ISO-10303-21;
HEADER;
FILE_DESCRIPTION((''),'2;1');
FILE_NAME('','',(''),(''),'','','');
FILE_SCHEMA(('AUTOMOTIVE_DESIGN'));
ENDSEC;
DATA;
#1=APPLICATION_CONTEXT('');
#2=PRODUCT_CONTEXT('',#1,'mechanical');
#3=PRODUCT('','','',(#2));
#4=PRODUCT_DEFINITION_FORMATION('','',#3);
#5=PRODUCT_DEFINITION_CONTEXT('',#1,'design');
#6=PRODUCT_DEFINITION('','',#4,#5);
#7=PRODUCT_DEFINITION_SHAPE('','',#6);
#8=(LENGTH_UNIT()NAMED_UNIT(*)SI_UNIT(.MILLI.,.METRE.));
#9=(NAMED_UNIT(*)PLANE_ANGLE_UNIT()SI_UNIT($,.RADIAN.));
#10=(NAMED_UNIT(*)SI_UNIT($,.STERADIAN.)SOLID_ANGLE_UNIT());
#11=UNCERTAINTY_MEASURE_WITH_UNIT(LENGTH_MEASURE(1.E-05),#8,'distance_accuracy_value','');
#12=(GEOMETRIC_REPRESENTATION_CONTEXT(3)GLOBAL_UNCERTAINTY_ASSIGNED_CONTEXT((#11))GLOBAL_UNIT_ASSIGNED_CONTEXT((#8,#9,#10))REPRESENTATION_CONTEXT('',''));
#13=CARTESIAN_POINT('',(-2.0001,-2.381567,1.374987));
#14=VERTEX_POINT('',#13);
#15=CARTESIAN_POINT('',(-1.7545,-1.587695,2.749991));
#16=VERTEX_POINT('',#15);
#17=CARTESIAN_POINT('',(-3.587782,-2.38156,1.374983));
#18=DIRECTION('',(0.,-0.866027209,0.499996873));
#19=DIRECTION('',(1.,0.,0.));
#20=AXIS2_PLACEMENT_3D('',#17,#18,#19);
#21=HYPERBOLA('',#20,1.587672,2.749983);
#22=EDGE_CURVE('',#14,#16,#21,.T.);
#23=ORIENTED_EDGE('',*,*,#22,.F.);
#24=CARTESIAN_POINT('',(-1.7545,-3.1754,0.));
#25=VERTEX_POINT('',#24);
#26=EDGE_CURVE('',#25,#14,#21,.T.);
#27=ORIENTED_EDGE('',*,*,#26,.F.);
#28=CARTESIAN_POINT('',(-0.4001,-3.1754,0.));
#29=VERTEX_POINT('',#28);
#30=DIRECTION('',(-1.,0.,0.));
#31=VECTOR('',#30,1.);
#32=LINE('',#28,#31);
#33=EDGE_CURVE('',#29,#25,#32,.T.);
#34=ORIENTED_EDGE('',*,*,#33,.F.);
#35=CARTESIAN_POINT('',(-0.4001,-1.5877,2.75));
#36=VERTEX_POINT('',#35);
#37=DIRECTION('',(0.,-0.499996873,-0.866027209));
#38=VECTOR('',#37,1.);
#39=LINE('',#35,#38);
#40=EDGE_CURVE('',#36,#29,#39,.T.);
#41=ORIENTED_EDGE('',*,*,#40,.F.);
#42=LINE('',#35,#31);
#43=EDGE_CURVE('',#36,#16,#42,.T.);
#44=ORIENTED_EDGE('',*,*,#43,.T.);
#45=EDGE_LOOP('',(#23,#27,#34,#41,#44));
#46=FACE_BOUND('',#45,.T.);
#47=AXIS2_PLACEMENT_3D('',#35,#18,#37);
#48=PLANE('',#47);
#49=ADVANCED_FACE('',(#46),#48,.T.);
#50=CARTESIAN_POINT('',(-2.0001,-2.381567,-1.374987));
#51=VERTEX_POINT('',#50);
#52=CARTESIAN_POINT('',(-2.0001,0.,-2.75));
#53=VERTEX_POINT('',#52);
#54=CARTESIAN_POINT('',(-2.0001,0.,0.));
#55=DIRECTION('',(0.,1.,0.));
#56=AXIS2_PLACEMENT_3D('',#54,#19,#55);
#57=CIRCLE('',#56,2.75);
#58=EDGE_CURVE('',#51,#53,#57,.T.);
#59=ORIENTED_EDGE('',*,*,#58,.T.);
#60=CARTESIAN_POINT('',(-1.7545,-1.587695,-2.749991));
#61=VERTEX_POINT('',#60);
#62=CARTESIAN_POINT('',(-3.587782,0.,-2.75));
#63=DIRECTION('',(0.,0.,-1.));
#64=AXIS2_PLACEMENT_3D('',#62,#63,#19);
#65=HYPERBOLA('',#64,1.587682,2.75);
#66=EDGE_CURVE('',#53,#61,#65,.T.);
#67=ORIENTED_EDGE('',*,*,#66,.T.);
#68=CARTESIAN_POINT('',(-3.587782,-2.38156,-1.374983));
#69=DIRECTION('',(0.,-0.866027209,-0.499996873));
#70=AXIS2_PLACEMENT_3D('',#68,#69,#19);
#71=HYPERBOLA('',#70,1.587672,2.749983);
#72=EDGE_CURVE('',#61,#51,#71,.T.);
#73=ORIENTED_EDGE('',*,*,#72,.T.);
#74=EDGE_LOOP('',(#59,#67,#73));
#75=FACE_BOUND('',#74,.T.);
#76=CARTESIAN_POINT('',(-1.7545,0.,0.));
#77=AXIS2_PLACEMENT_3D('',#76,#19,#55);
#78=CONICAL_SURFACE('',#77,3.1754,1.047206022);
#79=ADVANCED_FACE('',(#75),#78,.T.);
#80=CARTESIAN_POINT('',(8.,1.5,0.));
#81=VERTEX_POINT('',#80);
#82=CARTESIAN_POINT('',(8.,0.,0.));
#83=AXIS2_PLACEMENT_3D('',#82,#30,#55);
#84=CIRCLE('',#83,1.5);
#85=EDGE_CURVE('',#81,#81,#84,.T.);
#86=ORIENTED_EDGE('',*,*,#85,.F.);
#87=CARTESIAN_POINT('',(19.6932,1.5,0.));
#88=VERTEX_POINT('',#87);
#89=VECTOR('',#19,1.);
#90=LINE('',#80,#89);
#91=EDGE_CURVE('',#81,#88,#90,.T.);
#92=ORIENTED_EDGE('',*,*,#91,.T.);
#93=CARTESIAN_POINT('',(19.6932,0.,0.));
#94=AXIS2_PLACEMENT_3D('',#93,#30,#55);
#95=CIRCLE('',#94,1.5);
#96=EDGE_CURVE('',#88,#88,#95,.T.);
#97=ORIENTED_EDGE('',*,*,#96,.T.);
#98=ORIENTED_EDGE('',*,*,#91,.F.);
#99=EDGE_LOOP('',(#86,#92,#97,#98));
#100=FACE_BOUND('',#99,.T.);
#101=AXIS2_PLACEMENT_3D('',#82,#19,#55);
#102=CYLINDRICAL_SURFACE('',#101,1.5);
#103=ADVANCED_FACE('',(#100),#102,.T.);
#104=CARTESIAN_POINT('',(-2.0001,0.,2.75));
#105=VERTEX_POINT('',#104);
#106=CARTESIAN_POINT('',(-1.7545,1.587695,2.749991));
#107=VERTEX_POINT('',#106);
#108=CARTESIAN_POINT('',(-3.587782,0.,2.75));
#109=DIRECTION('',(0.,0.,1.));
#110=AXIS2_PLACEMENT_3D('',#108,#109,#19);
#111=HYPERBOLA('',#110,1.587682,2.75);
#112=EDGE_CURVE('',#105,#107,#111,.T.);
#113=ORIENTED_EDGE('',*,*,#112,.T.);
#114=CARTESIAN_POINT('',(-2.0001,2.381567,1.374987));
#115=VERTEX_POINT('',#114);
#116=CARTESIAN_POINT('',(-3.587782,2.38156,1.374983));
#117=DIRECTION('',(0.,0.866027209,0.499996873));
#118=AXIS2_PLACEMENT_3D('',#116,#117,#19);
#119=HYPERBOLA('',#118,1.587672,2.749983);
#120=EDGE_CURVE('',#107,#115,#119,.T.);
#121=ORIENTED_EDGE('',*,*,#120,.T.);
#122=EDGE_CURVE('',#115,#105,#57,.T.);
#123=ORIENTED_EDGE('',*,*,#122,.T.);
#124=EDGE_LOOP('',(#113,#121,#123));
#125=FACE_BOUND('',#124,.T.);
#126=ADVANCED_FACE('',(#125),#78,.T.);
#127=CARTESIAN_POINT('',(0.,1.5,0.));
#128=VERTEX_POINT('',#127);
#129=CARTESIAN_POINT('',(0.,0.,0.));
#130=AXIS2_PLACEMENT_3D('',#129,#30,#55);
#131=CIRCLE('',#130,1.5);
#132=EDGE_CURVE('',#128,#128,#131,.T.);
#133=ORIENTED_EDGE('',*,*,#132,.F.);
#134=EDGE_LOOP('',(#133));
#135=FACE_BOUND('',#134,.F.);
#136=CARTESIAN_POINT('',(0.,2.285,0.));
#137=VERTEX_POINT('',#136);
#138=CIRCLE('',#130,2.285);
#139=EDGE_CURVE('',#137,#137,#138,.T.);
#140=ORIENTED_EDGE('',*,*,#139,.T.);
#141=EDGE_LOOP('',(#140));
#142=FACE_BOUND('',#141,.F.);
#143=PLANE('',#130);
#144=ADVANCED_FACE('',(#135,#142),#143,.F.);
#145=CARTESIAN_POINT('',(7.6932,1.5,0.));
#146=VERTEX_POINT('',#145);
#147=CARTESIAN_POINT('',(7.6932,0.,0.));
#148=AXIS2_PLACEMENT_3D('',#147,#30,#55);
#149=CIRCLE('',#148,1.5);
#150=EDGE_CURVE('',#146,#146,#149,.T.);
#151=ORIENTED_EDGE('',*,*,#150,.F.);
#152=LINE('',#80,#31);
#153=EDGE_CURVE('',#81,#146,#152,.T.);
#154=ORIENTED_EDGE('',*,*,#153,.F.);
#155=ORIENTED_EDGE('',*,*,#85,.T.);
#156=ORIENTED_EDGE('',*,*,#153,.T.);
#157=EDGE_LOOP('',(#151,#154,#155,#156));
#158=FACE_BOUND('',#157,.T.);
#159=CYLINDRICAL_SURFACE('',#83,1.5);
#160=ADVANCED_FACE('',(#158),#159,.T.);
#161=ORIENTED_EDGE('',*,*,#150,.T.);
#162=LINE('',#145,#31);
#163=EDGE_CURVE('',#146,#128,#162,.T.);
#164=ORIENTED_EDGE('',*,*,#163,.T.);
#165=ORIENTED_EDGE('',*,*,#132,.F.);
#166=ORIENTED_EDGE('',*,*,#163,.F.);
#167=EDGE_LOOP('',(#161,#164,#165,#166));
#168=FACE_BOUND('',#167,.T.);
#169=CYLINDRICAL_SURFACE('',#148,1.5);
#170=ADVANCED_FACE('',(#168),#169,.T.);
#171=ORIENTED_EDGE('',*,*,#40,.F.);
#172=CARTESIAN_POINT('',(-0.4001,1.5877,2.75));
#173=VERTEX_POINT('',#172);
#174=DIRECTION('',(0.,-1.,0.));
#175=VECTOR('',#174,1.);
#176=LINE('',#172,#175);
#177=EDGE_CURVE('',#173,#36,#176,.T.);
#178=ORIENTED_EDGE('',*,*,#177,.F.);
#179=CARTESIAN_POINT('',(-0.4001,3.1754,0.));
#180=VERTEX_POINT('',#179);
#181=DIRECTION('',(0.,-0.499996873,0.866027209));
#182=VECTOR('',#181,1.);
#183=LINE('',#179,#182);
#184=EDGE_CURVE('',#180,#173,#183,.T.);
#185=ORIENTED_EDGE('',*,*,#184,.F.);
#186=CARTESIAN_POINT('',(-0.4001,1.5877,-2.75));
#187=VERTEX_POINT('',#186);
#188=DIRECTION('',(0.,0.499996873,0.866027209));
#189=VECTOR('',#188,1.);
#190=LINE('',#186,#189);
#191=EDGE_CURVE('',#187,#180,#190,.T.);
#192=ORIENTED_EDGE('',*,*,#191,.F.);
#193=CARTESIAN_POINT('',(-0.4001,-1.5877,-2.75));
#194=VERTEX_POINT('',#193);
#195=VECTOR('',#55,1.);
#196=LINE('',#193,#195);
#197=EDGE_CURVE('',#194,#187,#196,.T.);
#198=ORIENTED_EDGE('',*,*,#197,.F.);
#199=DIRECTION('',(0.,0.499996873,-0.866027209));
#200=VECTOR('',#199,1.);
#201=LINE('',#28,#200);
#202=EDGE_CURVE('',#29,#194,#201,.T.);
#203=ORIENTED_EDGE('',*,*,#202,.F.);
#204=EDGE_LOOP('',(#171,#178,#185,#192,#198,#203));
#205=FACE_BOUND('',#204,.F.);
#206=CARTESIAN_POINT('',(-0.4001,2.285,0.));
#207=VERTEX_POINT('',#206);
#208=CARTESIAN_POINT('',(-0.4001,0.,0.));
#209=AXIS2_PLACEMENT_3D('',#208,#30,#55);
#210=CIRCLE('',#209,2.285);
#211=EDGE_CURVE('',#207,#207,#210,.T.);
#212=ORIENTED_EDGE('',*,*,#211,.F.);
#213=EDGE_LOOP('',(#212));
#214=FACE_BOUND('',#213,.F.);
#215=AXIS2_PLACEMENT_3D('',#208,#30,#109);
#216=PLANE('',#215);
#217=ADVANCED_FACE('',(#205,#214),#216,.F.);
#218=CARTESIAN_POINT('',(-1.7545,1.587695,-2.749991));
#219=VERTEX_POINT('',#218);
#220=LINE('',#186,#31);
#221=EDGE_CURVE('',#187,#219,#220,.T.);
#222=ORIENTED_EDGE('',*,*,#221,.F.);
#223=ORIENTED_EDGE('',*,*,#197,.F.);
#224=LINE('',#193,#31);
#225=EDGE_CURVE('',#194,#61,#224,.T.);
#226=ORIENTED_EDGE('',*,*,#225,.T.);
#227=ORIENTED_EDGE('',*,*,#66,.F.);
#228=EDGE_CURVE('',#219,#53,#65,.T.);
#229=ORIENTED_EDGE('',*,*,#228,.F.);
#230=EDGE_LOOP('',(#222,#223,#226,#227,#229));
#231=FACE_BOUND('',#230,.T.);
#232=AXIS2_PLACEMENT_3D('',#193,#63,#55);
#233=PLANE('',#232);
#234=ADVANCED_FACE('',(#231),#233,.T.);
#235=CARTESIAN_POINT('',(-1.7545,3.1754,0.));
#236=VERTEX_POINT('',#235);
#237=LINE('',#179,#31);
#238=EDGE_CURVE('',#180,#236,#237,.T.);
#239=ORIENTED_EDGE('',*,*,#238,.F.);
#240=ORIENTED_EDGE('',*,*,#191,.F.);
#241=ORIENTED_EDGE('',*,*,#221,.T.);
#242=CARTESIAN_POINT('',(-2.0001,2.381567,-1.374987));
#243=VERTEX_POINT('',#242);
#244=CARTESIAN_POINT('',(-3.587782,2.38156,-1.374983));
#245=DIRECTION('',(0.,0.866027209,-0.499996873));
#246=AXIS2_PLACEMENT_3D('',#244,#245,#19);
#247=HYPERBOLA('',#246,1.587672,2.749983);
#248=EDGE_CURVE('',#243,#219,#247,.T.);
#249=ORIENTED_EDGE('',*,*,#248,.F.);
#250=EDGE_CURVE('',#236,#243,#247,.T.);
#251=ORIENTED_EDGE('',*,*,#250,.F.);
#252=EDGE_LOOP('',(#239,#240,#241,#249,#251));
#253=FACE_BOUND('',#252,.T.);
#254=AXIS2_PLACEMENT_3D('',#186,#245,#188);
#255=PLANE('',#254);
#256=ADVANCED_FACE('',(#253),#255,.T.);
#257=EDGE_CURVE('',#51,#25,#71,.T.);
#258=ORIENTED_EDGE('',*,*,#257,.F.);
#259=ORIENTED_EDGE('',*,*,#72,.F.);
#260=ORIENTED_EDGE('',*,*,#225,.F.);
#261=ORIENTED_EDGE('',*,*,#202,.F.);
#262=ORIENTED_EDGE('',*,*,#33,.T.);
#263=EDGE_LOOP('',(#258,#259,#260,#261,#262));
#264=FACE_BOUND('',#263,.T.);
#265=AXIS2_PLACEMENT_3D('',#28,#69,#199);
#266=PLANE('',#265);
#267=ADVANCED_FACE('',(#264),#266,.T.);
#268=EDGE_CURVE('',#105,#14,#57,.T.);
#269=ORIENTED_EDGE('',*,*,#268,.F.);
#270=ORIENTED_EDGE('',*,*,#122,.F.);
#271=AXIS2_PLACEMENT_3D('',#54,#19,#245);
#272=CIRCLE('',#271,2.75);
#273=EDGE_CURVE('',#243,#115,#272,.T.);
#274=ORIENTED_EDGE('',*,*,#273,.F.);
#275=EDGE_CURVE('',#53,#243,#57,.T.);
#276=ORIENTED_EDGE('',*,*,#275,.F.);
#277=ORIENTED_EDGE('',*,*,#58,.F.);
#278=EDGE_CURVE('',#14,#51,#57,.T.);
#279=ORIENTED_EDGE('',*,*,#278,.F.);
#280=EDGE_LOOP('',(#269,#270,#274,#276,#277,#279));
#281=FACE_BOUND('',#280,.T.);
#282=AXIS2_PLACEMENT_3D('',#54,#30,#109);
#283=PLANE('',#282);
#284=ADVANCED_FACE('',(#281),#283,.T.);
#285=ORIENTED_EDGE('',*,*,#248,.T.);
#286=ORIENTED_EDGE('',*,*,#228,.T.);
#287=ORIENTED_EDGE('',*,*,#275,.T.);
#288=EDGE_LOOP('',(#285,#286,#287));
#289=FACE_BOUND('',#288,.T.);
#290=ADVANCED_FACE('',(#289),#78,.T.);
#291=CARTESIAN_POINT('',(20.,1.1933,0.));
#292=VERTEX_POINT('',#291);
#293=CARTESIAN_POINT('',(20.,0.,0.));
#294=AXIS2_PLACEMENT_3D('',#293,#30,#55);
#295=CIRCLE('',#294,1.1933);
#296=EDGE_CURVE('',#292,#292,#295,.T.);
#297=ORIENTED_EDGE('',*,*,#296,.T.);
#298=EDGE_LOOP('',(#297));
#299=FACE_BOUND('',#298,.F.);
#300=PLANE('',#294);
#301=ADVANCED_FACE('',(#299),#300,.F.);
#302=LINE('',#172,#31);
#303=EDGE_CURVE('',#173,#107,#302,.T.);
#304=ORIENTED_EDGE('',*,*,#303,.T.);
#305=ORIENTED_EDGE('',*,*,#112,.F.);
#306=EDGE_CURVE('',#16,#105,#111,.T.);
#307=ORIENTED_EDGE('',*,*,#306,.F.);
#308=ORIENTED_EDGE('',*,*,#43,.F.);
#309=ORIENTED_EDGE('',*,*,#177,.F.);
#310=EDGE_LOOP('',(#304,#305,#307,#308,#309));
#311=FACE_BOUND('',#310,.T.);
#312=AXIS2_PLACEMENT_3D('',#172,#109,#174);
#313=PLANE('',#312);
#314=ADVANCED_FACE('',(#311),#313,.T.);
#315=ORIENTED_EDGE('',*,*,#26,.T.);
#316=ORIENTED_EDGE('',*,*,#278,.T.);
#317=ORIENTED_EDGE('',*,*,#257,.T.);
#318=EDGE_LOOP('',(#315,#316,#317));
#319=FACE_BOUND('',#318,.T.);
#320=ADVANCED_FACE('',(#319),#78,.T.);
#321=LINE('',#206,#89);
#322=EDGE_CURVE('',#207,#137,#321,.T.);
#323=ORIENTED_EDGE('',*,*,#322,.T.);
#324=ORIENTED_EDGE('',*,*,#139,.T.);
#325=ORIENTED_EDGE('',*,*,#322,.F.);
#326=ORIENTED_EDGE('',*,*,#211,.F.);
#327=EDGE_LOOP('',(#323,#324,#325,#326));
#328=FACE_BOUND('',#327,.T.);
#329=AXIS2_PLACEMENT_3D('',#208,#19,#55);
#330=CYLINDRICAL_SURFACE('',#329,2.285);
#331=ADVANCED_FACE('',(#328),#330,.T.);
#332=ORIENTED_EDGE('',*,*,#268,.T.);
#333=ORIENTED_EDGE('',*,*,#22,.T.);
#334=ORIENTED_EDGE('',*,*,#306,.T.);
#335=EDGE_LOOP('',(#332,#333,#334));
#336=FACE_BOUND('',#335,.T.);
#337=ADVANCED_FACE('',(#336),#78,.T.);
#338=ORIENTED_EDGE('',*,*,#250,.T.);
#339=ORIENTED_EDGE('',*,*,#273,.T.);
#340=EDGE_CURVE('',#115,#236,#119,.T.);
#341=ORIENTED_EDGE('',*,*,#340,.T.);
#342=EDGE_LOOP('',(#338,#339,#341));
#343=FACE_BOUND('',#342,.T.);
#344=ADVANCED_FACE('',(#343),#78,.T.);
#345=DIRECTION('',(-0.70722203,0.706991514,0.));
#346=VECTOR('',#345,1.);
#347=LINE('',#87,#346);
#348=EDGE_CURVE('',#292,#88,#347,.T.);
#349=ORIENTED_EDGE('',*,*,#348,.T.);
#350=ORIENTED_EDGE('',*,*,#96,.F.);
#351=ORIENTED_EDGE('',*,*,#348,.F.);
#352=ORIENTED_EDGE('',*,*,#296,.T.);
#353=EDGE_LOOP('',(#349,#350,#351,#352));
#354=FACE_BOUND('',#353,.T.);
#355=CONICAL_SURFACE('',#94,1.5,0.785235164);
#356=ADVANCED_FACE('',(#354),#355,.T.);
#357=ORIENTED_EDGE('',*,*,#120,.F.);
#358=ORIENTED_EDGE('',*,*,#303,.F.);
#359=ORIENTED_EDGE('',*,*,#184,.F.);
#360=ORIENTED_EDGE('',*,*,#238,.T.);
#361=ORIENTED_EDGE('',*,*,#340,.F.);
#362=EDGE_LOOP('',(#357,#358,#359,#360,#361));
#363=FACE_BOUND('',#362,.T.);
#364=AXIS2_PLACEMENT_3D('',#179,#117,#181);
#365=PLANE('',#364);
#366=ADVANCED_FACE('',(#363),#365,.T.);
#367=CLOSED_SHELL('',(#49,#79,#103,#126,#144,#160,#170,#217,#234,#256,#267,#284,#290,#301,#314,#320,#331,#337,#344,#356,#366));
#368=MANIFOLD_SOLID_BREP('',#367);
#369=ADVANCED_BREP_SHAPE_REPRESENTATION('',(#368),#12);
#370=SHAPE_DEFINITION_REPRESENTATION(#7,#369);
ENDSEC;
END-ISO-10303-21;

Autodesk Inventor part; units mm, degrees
ref_plane "YZ Plane" through (0, 0, 0) normal (1, 0, 0) x (0, 1, 0)
ref_plane "XZ Plane" through (0, 0, 0) normal (0, 1, 0) x (-1, 0, 0)
sketch "Skizze1" plane through (0, 0, 0) normal (0, 0, 1) x (1, 0, 0)
  line L0 (0, 2.285) -> (0, 1.5)
  line L1 (8, 1.5) -> (20, 1.5)
  line L2 (20, 1.5) -> (20, 0)
  line L3 (20, 0) -> (-0.4001, 0)
  line L4 (-4.4801, 0) -> (24.08, 0) projected
  line L5 (-0.4001, 0) -> (-0.4001, 2.285)
  line L6 (-0.4001, 2.285) -> (0, 2.285)
  line L7 (8, 1.5) -> (7.6932, 1.5)
  line L8 (7.6932, 1.5) -> (0, 1.5)
  line L9 (0, -0.457) -> (0, 2.742) projected
  dimension "d0" = 20
  dimension "d1" = 12
  dimension "d2" = 3
  dimension "d9" = 0.4001
  dimension "d10" = 4.57
  dimension "d13" = 0.3068
  dimension "d14" = 3
revolve "Körper" add sketch "Skizze1" angle 360 about axis through (20, 0, 0) along (-1, 0, 0)
sketch "Skizze2" plane through (-0.4001, 0, 0) normal (-1, 0, 0) x (0, 0, 1)
  line L0 (0, 3.1754) -> (2.75, 1.5877)
  line L1 (2.75, 1.5877) -> (2.75, -1.5877)
  line L2 (2.75, -1.5877) -> (0, -3.1754)
  line L3 (0, -3.1754) -> (-2.75, -1.5877)
  line L4 (-2.75, -1.5877) -> (-2.75, 1.5877)
  line L5 (-2.75, 1.5877) -> (0, 3.1754)
  point P0 (0, 0)
  point P1 (0, 0)
  dimension "d11" = 5.5
extrude "Kopf" add sketch "Skizze2" along normal blind 1.6
sketch "Skizze4" plane through (0, 0, 0) normal (0, 0, 1) x (1, 0, 0)
  line L0 (-2.0001, 2.75) -> (-2.0001, 3.1754)
  line L1 (-2.0001, 3.1754) -> (-1.7545, 3.1754)
  line L2 (-1.7545, 3.1754) -> (-2.0001, 2.75)
  line L3 (-2.3201, 0) -> (-0.0801, 0) projected
  line L4 (-0.4001, 3.1754) -> (-2.0001, 3.1754) projected
  line L5 (-2.0001, 1.5877) -> (-2.0001, 3.1754) projected
  dimension "d5" = 30
  dimension "d19" = 5.5
revolve "Fase1" cut sketch "Skizze4" angle 360 about axis through (-10, 0, 0) along (1, 0, 0)
thread "Gewinde" size "M3x0.5" class "6g" standard "ISO Metric profile" length 12
chamfer "Fase2" distance 0.3067 distance2 0.3068 1 edges at (20, -1.5, 0) measured on face at (20, 0.3743, -0.3316)
ref_plane "Work Plane1" through (1.525, 0, 0) normal (0, 0, 1) x (1, 0, 0)
equation "\"d0\" = NLG"
equation "\"d1\" = GEL"
equation "\"d2\" = GD"
equation "\"d10\" = SD2"
equation "\"d14\" = BDM"
equation "\"d11\" = SW"
equation "\"d3\" = KOH - SD"
equation "\"d5\" = ANG1"
equation "\"d19\" = SW0"
equation "\"d15\" = GEL"
equation "\"d6\" = -0.5 * SPD + 0.5 * GD"
equation "\"NLG\" = 20"
equation "\"GD\" = NND"
equation "\"BDM\" = NND"
equation "\"KOH\" = 2"
equation "\"GEL\" = 12"
equation "\"SW\" = 5.5"
equation "\"SW0\" = SW"
equation "\"SPD\" = NND - 1.2269 * PTC"
equation "\"SD2\" = 4.57"
equation "\"SD\" = 0.4"
equation "\"ANG1\" = 30deg"
equation "\"GAL\" = 0.61345 * PTC"
equation "\"GUL\" = 0.61345 * PTC"
equation "\"RR\" = 0.1"
equation "\"GD1\" = THREADDIA - 1.2269 * PTC"
equation "\"THREADDIA\" = 3"
equation "\"SDH\" = SD2"
equation "\"TOA\" = 30deg"
equation "\"PTC\" = 0.5"
equation "\"NND\" = 3"
equation "\"E0\" = 1.155 * SW"
properties part number "ISO 4014 - M3 x 20" material "Edelstahl, 440C"
